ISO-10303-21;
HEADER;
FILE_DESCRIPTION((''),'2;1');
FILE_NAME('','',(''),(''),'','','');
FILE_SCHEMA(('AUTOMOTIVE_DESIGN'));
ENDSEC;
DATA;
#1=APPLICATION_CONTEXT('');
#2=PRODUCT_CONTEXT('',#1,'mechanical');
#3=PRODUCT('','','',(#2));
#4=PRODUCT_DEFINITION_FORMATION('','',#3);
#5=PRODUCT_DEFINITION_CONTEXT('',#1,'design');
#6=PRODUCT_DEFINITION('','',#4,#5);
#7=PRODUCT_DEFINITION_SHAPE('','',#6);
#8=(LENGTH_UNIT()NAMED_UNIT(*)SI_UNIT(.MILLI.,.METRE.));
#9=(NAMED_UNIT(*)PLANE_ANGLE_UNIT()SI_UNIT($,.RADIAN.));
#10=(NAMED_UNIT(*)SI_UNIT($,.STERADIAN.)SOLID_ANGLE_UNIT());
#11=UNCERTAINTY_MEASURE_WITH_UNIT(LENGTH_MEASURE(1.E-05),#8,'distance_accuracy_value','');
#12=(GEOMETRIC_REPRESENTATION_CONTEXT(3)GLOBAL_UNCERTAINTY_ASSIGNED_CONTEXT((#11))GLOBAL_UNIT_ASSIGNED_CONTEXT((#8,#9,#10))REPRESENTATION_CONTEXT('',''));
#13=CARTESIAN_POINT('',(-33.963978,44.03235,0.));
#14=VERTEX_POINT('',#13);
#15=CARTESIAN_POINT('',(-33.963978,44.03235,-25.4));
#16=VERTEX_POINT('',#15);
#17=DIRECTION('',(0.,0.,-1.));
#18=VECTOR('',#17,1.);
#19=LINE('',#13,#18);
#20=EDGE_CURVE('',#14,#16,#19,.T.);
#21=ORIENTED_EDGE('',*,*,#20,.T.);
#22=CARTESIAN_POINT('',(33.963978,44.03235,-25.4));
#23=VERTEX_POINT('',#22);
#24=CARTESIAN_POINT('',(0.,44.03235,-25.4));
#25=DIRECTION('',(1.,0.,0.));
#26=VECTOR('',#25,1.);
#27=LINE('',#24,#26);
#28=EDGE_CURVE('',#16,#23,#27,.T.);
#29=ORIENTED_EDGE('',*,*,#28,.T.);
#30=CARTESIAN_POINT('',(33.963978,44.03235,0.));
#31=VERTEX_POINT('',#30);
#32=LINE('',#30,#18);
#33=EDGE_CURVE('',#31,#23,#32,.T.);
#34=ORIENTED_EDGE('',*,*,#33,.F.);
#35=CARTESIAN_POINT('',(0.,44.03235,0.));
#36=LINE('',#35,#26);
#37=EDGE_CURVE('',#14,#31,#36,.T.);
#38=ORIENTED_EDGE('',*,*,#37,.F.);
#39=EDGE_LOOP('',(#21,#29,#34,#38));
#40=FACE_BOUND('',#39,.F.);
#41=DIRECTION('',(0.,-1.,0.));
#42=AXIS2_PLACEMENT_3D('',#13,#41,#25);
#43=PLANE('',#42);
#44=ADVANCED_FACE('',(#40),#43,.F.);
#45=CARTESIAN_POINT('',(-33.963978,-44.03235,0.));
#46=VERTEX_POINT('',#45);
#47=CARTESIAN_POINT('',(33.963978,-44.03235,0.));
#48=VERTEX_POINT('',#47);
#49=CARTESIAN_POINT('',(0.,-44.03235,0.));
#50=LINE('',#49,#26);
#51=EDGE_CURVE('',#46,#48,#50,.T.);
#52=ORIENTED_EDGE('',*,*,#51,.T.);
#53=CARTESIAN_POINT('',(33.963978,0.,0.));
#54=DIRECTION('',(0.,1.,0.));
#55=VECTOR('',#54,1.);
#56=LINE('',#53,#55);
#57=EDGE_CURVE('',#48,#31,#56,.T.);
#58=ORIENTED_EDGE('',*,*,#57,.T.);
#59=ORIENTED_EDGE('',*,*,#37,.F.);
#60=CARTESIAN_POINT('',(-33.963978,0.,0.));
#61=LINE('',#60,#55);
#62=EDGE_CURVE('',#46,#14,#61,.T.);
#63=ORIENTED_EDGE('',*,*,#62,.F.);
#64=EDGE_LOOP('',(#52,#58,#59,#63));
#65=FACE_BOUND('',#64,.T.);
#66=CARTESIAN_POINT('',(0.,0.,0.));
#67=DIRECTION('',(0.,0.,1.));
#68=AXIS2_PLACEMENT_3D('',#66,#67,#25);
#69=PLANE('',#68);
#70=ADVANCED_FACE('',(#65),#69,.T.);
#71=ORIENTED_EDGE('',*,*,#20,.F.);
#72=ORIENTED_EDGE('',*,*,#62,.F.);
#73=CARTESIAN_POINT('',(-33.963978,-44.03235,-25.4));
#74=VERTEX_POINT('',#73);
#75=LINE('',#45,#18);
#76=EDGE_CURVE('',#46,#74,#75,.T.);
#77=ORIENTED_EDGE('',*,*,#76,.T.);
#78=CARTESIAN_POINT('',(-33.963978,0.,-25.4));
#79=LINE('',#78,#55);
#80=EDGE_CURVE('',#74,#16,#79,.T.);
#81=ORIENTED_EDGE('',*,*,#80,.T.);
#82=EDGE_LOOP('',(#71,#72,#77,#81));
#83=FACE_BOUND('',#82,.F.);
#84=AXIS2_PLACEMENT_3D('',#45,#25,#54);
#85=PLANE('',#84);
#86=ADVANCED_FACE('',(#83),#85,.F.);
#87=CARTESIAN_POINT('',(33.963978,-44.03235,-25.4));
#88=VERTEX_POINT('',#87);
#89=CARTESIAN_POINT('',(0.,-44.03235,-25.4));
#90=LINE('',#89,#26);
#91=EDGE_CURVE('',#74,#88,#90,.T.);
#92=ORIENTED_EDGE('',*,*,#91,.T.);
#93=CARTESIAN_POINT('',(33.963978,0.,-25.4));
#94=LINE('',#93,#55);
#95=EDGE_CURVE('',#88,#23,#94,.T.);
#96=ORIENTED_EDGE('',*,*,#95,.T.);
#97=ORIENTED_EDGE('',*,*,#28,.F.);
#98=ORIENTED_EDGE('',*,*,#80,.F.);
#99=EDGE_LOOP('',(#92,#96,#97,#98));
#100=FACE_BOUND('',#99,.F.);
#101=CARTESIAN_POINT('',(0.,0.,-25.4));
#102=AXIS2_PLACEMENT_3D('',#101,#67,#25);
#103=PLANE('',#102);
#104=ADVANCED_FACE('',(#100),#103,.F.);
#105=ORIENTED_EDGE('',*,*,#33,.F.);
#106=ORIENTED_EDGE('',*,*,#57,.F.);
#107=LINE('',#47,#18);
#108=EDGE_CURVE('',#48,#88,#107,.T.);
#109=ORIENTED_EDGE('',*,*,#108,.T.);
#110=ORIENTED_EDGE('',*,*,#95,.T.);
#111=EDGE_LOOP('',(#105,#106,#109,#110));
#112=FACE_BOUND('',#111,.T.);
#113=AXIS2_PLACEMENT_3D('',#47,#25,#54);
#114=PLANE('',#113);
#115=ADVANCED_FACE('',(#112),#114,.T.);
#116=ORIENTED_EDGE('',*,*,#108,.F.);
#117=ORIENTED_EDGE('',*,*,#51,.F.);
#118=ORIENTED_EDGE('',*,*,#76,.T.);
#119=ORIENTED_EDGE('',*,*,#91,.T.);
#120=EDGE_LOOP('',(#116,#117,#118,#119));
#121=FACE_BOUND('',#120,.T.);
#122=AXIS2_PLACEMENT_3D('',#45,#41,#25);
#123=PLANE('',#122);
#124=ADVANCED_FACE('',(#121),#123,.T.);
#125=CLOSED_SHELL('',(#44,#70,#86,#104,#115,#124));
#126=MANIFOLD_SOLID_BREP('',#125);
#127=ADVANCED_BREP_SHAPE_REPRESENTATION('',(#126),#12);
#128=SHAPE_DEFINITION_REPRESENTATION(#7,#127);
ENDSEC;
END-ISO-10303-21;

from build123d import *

# Parameters (mm, degrees)
F0_W     = 67.9279565811
F0_H     = 88.0647003651
F1_DEPTH = 25.4


# Not quite as in the source:
# - a feature of the source that left no trace in its solid (it failed there, or was rolled back) is left out


with BuildPart() as f1:
    # F0 (on Top) → F1 (new body)
    with BuildSketch(Plane.XY):
        Rectangle(F0_W, F0_H)
    extrude(amount=-F1_DEPTH)


solid = f1.part
